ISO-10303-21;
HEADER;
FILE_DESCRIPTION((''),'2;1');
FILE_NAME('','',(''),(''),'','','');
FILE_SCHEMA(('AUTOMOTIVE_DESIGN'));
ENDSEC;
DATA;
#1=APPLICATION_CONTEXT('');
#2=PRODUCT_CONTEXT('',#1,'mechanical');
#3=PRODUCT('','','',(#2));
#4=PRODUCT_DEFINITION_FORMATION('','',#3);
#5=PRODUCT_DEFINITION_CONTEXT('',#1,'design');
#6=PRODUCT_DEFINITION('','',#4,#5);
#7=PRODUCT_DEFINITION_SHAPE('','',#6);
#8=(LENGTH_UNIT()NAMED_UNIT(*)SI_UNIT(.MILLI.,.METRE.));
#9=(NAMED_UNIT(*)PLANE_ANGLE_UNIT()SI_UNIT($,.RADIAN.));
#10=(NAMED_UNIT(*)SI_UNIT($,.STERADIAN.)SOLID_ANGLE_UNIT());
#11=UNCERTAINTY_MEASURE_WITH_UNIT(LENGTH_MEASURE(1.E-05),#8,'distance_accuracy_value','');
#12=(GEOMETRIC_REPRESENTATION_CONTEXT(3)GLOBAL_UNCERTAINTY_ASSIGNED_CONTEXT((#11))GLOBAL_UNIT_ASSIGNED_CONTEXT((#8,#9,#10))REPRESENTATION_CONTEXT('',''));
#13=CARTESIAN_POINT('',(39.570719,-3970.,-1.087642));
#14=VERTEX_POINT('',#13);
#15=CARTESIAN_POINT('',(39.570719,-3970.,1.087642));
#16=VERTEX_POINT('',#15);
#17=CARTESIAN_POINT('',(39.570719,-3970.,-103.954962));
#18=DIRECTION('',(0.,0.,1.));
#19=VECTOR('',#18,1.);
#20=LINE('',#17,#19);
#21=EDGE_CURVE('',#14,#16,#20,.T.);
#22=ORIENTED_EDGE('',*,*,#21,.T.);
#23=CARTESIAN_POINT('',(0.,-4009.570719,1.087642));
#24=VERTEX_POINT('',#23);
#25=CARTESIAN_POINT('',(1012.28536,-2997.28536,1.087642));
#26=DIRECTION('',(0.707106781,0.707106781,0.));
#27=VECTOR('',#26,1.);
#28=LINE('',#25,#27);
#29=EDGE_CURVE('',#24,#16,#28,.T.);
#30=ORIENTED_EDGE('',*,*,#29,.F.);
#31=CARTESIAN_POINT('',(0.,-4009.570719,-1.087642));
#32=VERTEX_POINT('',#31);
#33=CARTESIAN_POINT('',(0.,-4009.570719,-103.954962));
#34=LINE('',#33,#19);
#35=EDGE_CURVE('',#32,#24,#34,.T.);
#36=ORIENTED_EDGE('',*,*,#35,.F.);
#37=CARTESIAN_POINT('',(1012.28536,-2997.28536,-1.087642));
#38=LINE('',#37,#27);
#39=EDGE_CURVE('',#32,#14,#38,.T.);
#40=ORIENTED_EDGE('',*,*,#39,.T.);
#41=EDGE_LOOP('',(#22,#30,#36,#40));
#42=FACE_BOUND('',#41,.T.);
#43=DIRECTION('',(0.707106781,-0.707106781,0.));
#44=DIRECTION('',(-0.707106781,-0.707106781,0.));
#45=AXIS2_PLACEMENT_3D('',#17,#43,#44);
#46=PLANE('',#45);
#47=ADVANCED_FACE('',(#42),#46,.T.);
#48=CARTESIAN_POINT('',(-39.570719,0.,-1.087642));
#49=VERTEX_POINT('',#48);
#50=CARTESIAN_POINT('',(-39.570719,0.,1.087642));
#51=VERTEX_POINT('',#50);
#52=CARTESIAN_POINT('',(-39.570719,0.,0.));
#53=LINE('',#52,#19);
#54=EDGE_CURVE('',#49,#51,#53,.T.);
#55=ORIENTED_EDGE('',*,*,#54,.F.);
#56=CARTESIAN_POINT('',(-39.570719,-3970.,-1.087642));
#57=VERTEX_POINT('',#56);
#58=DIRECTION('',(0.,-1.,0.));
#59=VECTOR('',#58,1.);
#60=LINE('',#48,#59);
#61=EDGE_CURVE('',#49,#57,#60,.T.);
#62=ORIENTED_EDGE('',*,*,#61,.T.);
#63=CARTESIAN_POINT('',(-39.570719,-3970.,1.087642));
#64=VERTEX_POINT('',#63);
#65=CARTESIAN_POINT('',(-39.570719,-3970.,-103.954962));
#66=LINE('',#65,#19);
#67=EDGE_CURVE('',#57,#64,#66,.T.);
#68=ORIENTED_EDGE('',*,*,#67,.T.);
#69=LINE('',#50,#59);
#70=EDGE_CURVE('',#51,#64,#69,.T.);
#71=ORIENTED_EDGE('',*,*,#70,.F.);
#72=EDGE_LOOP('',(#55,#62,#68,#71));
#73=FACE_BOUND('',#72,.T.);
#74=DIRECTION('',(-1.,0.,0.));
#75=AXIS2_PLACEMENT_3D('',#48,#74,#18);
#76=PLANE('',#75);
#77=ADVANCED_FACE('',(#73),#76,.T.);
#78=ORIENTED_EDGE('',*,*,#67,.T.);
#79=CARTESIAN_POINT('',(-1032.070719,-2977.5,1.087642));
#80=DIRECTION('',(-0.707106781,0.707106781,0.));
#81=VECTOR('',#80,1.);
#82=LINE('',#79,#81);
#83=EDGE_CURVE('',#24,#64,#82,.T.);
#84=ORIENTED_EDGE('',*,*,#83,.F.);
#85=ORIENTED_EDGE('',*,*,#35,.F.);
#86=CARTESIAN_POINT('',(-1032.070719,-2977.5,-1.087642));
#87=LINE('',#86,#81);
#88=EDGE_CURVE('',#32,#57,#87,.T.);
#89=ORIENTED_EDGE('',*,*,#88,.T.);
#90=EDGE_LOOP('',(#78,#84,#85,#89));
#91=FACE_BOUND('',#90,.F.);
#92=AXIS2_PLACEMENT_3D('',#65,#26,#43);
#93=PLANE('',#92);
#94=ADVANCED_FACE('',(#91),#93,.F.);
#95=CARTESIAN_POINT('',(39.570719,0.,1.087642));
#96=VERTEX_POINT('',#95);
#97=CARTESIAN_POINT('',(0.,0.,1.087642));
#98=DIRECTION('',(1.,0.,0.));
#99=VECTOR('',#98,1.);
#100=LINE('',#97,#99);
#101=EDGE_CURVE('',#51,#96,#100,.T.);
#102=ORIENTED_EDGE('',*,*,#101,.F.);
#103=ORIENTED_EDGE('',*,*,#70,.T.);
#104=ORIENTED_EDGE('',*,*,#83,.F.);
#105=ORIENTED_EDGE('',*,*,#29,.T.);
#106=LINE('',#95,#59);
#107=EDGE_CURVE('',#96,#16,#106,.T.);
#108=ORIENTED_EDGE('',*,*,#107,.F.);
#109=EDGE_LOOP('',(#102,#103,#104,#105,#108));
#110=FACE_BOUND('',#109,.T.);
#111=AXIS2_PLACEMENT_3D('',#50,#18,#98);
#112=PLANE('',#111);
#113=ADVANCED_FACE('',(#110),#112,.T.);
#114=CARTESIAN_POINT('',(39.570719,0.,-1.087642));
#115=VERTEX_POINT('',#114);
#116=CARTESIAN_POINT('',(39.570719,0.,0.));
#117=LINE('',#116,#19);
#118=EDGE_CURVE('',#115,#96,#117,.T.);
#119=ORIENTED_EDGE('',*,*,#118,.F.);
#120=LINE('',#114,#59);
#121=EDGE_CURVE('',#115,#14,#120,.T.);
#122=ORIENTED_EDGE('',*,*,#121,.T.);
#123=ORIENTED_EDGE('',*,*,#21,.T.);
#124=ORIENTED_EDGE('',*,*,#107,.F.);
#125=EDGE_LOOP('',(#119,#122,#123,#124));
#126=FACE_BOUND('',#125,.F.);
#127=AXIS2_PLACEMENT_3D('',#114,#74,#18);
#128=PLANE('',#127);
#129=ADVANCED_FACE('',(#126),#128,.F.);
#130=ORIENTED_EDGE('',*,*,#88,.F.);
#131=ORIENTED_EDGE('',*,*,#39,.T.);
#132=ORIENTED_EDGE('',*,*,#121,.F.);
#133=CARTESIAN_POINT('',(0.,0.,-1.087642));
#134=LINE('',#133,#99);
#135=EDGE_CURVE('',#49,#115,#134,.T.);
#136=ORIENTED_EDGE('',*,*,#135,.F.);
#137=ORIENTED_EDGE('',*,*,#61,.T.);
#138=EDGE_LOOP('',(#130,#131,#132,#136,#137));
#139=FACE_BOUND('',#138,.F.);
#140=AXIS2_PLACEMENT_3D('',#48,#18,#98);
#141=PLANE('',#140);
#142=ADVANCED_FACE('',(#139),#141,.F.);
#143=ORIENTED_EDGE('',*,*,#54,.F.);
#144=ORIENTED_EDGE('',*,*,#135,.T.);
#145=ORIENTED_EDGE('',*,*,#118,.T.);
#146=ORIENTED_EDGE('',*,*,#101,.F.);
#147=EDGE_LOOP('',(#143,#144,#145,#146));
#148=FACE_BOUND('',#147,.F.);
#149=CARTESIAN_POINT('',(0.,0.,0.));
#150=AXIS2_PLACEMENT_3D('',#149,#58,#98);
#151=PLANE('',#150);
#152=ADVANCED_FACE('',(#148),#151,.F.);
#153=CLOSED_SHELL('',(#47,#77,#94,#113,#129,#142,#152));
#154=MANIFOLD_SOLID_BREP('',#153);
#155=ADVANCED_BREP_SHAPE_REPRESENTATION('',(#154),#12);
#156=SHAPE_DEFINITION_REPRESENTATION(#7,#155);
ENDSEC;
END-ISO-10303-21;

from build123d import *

# Parameters (mm, degrees)
F0_W        = 79.1414380074
F0_H        = 2.1752845496
F1_DEPTH    = 4010
F2_T1_DEPTH = 207.9099235869


# Not quite as in the source:
# - a fillet or chamfer that OpenCascade refuses, or shapes differently, is made with other operations: its cross-section is extruded or revolved along the edge and cut away or added


with BuildPart() as f1:
    # F0 (on Front) → F1 (new body)
    with BuildSketch(Plane.XZ):
        Rectangle(F0_W, F0_H)
    extrude(amount=F1_DEPTH)

    # F2: chamfer of 40 on 2 edges, made by hand

    # F2_s2 → F2_t1 (cut)
    with BuildSketch(Plane.XY.offset(-103.9549617934)):
        Polygon((39.5707190037, -3970), (-0.4292809963, -4010), (39.5707190037, -4010), align=None)
        Polygon((-39.5707190037, -3970), (0.4292809963, -4010), (-39.5707190037, -4010), align=None)
    extrude(amount=F2_T1_DEPTH, mode=Mode.SUBTRACT)


solid = f1.part
